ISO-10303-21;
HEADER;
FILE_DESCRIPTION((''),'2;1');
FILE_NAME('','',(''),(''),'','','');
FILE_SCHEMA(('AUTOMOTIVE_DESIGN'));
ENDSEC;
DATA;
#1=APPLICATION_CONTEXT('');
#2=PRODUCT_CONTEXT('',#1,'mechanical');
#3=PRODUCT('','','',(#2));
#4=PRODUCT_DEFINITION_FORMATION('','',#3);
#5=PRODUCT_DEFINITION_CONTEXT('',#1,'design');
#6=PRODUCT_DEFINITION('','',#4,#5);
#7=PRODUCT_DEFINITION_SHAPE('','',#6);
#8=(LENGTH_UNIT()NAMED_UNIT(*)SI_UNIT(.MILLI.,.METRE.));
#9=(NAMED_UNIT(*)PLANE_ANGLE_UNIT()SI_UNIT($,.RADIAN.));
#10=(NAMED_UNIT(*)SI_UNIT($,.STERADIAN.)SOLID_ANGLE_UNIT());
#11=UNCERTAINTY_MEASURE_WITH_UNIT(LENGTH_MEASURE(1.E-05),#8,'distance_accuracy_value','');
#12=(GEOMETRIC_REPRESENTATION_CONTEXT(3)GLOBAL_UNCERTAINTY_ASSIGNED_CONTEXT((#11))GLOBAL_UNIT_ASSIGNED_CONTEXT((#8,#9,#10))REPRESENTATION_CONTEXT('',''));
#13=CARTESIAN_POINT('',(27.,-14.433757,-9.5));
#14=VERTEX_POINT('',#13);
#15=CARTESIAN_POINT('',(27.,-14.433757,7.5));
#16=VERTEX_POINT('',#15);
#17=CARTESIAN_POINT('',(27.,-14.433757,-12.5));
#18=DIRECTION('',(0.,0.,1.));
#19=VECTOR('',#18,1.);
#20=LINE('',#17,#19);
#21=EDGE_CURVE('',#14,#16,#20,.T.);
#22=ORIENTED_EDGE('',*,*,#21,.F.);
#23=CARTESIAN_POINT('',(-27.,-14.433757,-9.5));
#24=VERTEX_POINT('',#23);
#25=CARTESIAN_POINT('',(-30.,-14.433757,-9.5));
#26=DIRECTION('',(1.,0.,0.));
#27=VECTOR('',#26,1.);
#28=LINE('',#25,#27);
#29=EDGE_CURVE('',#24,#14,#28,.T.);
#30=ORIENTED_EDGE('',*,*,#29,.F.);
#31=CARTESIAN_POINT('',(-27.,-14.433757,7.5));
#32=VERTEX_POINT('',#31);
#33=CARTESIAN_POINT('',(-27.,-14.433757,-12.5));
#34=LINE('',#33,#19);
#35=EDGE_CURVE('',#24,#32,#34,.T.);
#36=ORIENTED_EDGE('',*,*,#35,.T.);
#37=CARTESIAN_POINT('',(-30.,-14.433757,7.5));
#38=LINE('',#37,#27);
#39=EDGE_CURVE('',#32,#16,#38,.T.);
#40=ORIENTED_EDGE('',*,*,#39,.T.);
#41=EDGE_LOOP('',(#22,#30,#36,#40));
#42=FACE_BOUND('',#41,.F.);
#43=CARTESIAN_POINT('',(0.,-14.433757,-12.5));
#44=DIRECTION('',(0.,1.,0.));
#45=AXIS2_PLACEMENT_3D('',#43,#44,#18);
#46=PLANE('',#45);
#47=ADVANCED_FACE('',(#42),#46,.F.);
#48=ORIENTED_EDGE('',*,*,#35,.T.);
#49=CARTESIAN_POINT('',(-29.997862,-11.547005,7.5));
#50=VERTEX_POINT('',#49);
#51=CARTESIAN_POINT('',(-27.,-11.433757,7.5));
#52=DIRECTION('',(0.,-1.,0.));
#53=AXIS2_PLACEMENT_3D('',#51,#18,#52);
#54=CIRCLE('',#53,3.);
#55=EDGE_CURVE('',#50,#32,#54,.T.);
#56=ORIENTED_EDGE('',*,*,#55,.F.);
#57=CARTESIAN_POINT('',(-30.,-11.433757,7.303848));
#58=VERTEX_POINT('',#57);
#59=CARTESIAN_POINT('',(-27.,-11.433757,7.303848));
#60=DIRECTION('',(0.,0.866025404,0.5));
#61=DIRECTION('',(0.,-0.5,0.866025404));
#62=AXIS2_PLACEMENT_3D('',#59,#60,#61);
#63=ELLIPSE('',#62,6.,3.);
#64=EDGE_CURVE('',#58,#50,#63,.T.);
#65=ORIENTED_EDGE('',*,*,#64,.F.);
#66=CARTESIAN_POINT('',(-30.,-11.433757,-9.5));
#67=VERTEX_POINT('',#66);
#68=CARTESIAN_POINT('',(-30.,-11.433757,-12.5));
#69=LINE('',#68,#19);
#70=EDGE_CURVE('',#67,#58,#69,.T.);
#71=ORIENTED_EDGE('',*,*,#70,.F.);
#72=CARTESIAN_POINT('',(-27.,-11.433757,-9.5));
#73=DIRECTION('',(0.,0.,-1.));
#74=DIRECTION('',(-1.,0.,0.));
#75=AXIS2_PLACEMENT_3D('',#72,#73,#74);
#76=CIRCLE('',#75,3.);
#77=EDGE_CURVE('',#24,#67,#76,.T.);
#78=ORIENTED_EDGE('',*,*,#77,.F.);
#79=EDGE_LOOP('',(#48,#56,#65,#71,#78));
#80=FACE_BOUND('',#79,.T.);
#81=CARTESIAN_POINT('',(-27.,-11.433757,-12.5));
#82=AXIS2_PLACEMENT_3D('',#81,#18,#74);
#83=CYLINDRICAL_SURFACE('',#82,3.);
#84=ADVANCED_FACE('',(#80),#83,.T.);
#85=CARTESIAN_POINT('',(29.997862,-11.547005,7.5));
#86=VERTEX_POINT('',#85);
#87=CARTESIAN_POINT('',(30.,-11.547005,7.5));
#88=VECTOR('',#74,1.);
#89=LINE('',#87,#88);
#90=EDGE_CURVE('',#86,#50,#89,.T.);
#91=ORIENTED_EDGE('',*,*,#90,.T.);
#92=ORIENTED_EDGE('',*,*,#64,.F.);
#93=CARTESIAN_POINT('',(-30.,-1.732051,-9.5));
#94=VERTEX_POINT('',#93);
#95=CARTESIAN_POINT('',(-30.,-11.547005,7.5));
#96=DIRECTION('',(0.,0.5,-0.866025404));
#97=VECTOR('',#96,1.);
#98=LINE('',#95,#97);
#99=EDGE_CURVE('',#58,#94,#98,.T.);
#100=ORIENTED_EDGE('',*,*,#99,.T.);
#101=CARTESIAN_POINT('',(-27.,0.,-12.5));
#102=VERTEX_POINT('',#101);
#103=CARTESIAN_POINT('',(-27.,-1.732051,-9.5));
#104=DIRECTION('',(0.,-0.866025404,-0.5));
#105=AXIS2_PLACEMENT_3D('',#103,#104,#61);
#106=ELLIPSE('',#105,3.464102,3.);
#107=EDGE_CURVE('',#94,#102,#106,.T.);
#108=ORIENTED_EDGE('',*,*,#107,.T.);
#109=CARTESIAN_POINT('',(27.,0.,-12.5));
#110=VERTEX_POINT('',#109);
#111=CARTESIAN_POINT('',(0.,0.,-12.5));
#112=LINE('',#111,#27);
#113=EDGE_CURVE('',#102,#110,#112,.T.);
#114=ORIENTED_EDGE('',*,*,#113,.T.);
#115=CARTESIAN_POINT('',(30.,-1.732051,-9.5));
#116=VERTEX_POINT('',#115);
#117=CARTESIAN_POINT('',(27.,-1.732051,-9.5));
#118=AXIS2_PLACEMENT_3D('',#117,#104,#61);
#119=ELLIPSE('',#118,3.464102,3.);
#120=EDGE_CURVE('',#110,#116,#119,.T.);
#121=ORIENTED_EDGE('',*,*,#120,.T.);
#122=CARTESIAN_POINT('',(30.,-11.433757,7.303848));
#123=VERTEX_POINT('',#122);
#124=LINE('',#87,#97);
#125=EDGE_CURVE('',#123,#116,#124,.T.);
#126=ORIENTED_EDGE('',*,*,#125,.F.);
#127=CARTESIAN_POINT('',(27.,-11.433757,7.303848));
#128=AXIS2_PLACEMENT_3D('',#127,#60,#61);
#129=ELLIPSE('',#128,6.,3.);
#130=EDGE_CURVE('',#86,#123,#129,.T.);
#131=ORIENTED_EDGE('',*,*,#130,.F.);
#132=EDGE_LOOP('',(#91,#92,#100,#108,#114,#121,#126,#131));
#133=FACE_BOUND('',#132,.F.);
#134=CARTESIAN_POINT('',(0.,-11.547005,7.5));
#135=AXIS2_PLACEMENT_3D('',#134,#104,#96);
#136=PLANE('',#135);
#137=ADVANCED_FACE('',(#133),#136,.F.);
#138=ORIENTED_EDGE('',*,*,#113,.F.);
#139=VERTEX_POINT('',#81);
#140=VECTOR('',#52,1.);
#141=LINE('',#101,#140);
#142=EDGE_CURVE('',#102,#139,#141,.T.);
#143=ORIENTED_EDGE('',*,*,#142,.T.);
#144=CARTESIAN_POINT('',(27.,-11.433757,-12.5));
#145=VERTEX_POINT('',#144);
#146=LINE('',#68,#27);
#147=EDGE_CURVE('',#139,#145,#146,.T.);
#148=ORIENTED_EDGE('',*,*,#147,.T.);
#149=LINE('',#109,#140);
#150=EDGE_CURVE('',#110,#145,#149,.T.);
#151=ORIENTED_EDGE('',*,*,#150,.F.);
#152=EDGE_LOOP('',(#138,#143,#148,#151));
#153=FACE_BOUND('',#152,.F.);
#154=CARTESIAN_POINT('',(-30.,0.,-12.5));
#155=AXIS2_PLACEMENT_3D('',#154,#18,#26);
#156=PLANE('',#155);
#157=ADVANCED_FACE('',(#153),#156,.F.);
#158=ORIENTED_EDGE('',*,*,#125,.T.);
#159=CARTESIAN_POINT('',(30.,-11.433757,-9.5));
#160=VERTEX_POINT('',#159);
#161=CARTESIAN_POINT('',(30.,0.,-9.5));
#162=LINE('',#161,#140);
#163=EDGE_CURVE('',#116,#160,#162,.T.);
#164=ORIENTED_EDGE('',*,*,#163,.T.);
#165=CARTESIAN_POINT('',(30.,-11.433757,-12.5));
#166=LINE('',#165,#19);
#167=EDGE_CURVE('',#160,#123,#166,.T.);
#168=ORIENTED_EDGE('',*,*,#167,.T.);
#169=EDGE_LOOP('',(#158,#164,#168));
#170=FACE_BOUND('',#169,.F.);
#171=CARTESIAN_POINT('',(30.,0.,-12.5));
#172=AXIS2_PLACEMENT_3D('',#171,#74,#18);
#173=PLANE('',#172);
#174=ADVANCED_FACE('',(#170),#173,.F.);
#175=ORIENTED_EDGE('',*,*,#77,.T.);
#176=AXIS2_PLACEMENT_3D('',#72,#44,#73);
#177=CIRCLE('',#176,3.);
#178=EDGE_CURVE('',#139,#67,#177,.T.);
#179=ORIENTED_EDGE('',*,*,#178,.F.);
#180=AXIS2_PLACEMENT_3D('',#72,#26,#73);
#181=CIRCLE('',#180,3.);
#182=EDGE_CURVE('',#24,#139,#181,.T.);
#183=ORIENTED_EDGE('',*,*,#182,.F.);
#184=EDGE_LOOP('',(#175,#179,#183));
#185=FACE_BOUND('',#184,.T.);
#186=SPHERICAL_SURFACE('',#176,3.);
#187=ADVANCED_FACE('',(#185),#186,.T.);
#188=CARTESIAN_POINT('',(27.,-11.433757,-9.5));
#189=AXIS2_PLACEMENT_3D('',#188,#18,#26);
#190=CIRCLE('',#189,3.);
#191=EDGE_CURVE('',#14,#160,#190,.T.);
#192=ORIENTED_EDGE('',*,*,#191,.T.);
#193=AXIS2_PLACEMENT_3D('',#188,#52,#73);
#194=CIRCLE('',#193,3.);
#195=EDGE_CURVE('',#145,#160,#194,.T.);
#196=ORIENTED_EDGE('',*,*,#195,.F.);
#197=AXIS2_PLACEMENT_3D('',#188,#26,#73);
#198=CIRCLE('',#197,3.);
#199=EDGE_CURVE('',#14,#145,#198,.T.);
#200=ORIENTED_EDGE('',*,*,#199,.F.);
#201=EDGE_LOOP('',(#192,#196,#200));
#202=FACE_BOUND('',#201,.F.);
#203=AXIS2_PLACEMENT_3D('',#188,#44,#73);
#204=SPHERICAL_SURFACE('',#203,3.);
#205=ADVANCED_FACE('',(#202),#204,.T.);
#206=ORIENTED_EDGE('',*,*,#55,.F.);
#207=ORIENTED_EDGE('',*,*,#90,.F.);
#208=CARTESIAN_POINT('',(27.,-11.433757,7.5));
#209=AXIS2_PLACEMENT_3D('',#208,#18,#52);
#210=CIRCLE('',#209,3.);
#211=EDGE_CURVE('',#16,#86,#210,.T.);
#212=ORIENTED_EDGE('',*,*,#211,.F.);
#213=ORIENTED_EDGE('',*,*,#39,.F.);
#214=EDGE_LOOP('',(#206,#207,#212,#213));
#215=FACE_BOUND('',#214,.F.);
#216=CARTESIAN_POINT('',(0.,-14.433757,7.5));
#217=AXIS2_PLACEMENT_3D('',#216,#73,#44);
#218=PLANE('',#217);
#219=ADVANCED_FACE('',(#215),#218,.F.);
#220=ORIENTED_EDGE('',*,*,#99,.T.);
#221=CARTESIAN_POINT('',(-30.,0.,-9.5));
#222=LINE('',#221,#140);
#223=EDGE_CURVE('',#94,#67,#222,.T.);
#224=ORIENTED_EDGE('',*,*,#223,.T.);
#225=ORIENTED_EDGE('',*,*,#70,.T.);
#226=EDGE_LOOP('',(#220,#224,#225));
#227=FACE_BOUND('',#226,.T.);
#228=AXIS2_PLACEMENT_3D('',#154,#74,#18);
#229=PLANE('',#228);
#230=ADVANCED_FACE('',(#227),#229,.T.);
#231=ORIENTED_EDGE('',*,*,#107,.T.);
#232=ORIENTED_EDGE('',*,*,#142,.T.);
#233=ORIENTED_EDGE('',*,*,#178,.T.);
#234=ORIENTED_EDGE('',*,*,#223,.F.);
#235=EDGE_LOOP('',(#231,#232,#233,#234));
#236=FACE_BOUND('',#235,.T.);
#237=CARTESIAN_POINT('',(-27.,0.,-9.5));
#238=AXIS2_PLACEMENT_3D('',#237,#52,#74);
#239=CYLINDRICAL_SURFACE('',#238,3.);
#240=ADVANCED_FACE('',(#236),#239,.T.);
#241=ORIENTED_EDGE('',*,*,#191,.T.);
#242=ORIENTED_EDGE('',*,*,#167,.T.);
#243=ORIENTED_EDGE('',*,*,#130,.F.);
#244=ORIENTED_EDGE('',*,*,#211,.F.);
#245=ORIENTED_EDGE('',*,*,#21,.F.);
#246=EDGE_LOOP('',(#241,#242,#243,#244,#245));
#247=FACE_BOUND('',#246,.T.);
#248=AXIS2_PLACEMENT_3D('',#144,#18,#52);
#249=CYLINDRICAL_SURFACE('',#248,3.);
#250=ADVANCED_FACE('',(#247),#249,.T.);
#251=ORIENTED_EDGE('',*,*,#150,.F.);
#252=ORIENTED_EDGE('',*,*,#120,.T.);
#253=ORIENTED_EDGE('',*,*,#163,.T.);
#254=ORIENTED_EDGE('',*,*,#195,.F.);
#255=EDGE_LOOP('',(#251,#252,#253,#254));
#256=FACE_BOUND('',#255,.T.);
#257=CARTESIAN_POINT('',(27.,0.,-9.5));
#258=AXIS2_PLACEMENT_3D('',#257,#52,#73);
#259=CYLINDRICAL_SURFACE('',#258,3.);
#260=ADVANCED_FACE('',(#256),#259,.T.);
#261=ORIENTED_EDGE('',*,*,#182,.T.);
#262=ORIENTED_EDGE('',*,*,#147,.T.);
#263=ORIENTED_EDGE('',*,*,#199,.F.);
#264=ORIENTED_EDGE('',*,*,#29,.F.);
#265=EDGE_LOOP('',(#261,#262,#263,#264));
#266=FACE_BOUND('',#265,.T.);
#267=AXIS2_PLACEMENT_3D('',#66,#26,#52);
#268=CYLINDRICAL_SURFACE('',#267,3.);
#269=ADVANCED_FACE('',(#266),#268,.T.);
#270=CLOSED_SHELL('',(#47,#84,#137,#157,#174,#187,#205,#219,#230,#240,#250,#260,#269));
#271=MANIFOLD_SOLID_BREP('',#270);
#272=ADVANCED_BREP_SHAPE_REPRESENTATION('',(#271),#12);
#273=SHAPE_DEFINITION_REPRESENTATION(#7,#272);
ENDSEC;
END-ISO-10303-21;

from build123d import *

# Parameters (mm, degrees)
F0_W     = 60
F0_H     = 25
F1_DEPTH = 18
F3_DEPTH = 30
F4_R     = 3


# Not quite as in the source:
# - a feature names something its author has since deleted; it is built from what else it names


with BuildPart() as f1:
    # F0 (on Front) → F1 (new body)
    with BuildSketch(Plane.XZ):
        Rectangle(F0_W, F0_H)
    extrude(amount=F1_DEPTH)

    # F2 (on Right) → F3 (cut, symmetric)
    with BuildSketch(Plane.YZ):
        Polygon((0, 12.5), (-14.4337567297, 12.5), (-11.5470053838, 7.5), (0, -12.5), (0, 0), align=None)
        Polygon((-14.4337567297, 7.5), (-14.4337567297, 12.5), (-17.3205080757, 12.5), (-19.7896268219, 12.5), (-19.7896268219, -12.5), (-17.3205080757, -12.5), (-14.4337567297, -12.5), align=None)
        Polygon((-11.5470053838, 7.5), (-14.4337567297, 12.5), (-14.4337567297, 7.5), align=None)
    extrude(amount=F3_DEPTH, both=True, mode=Mode.SUBTRACT)

    # F4
    f4_edges = [f1.edges().sort_by_distance(p)[0] for p in [
        (30, -7.216878, -12.5),
        (-30, -7.216878, -12.5),
        (0, -14.433757, -12.5),
        (30, -14.433757, -2.5),
        (-30, -14.433757, -2.5),
    ]]
    fillet(f4_edges, radius=F4_R)


solid = f1.part
